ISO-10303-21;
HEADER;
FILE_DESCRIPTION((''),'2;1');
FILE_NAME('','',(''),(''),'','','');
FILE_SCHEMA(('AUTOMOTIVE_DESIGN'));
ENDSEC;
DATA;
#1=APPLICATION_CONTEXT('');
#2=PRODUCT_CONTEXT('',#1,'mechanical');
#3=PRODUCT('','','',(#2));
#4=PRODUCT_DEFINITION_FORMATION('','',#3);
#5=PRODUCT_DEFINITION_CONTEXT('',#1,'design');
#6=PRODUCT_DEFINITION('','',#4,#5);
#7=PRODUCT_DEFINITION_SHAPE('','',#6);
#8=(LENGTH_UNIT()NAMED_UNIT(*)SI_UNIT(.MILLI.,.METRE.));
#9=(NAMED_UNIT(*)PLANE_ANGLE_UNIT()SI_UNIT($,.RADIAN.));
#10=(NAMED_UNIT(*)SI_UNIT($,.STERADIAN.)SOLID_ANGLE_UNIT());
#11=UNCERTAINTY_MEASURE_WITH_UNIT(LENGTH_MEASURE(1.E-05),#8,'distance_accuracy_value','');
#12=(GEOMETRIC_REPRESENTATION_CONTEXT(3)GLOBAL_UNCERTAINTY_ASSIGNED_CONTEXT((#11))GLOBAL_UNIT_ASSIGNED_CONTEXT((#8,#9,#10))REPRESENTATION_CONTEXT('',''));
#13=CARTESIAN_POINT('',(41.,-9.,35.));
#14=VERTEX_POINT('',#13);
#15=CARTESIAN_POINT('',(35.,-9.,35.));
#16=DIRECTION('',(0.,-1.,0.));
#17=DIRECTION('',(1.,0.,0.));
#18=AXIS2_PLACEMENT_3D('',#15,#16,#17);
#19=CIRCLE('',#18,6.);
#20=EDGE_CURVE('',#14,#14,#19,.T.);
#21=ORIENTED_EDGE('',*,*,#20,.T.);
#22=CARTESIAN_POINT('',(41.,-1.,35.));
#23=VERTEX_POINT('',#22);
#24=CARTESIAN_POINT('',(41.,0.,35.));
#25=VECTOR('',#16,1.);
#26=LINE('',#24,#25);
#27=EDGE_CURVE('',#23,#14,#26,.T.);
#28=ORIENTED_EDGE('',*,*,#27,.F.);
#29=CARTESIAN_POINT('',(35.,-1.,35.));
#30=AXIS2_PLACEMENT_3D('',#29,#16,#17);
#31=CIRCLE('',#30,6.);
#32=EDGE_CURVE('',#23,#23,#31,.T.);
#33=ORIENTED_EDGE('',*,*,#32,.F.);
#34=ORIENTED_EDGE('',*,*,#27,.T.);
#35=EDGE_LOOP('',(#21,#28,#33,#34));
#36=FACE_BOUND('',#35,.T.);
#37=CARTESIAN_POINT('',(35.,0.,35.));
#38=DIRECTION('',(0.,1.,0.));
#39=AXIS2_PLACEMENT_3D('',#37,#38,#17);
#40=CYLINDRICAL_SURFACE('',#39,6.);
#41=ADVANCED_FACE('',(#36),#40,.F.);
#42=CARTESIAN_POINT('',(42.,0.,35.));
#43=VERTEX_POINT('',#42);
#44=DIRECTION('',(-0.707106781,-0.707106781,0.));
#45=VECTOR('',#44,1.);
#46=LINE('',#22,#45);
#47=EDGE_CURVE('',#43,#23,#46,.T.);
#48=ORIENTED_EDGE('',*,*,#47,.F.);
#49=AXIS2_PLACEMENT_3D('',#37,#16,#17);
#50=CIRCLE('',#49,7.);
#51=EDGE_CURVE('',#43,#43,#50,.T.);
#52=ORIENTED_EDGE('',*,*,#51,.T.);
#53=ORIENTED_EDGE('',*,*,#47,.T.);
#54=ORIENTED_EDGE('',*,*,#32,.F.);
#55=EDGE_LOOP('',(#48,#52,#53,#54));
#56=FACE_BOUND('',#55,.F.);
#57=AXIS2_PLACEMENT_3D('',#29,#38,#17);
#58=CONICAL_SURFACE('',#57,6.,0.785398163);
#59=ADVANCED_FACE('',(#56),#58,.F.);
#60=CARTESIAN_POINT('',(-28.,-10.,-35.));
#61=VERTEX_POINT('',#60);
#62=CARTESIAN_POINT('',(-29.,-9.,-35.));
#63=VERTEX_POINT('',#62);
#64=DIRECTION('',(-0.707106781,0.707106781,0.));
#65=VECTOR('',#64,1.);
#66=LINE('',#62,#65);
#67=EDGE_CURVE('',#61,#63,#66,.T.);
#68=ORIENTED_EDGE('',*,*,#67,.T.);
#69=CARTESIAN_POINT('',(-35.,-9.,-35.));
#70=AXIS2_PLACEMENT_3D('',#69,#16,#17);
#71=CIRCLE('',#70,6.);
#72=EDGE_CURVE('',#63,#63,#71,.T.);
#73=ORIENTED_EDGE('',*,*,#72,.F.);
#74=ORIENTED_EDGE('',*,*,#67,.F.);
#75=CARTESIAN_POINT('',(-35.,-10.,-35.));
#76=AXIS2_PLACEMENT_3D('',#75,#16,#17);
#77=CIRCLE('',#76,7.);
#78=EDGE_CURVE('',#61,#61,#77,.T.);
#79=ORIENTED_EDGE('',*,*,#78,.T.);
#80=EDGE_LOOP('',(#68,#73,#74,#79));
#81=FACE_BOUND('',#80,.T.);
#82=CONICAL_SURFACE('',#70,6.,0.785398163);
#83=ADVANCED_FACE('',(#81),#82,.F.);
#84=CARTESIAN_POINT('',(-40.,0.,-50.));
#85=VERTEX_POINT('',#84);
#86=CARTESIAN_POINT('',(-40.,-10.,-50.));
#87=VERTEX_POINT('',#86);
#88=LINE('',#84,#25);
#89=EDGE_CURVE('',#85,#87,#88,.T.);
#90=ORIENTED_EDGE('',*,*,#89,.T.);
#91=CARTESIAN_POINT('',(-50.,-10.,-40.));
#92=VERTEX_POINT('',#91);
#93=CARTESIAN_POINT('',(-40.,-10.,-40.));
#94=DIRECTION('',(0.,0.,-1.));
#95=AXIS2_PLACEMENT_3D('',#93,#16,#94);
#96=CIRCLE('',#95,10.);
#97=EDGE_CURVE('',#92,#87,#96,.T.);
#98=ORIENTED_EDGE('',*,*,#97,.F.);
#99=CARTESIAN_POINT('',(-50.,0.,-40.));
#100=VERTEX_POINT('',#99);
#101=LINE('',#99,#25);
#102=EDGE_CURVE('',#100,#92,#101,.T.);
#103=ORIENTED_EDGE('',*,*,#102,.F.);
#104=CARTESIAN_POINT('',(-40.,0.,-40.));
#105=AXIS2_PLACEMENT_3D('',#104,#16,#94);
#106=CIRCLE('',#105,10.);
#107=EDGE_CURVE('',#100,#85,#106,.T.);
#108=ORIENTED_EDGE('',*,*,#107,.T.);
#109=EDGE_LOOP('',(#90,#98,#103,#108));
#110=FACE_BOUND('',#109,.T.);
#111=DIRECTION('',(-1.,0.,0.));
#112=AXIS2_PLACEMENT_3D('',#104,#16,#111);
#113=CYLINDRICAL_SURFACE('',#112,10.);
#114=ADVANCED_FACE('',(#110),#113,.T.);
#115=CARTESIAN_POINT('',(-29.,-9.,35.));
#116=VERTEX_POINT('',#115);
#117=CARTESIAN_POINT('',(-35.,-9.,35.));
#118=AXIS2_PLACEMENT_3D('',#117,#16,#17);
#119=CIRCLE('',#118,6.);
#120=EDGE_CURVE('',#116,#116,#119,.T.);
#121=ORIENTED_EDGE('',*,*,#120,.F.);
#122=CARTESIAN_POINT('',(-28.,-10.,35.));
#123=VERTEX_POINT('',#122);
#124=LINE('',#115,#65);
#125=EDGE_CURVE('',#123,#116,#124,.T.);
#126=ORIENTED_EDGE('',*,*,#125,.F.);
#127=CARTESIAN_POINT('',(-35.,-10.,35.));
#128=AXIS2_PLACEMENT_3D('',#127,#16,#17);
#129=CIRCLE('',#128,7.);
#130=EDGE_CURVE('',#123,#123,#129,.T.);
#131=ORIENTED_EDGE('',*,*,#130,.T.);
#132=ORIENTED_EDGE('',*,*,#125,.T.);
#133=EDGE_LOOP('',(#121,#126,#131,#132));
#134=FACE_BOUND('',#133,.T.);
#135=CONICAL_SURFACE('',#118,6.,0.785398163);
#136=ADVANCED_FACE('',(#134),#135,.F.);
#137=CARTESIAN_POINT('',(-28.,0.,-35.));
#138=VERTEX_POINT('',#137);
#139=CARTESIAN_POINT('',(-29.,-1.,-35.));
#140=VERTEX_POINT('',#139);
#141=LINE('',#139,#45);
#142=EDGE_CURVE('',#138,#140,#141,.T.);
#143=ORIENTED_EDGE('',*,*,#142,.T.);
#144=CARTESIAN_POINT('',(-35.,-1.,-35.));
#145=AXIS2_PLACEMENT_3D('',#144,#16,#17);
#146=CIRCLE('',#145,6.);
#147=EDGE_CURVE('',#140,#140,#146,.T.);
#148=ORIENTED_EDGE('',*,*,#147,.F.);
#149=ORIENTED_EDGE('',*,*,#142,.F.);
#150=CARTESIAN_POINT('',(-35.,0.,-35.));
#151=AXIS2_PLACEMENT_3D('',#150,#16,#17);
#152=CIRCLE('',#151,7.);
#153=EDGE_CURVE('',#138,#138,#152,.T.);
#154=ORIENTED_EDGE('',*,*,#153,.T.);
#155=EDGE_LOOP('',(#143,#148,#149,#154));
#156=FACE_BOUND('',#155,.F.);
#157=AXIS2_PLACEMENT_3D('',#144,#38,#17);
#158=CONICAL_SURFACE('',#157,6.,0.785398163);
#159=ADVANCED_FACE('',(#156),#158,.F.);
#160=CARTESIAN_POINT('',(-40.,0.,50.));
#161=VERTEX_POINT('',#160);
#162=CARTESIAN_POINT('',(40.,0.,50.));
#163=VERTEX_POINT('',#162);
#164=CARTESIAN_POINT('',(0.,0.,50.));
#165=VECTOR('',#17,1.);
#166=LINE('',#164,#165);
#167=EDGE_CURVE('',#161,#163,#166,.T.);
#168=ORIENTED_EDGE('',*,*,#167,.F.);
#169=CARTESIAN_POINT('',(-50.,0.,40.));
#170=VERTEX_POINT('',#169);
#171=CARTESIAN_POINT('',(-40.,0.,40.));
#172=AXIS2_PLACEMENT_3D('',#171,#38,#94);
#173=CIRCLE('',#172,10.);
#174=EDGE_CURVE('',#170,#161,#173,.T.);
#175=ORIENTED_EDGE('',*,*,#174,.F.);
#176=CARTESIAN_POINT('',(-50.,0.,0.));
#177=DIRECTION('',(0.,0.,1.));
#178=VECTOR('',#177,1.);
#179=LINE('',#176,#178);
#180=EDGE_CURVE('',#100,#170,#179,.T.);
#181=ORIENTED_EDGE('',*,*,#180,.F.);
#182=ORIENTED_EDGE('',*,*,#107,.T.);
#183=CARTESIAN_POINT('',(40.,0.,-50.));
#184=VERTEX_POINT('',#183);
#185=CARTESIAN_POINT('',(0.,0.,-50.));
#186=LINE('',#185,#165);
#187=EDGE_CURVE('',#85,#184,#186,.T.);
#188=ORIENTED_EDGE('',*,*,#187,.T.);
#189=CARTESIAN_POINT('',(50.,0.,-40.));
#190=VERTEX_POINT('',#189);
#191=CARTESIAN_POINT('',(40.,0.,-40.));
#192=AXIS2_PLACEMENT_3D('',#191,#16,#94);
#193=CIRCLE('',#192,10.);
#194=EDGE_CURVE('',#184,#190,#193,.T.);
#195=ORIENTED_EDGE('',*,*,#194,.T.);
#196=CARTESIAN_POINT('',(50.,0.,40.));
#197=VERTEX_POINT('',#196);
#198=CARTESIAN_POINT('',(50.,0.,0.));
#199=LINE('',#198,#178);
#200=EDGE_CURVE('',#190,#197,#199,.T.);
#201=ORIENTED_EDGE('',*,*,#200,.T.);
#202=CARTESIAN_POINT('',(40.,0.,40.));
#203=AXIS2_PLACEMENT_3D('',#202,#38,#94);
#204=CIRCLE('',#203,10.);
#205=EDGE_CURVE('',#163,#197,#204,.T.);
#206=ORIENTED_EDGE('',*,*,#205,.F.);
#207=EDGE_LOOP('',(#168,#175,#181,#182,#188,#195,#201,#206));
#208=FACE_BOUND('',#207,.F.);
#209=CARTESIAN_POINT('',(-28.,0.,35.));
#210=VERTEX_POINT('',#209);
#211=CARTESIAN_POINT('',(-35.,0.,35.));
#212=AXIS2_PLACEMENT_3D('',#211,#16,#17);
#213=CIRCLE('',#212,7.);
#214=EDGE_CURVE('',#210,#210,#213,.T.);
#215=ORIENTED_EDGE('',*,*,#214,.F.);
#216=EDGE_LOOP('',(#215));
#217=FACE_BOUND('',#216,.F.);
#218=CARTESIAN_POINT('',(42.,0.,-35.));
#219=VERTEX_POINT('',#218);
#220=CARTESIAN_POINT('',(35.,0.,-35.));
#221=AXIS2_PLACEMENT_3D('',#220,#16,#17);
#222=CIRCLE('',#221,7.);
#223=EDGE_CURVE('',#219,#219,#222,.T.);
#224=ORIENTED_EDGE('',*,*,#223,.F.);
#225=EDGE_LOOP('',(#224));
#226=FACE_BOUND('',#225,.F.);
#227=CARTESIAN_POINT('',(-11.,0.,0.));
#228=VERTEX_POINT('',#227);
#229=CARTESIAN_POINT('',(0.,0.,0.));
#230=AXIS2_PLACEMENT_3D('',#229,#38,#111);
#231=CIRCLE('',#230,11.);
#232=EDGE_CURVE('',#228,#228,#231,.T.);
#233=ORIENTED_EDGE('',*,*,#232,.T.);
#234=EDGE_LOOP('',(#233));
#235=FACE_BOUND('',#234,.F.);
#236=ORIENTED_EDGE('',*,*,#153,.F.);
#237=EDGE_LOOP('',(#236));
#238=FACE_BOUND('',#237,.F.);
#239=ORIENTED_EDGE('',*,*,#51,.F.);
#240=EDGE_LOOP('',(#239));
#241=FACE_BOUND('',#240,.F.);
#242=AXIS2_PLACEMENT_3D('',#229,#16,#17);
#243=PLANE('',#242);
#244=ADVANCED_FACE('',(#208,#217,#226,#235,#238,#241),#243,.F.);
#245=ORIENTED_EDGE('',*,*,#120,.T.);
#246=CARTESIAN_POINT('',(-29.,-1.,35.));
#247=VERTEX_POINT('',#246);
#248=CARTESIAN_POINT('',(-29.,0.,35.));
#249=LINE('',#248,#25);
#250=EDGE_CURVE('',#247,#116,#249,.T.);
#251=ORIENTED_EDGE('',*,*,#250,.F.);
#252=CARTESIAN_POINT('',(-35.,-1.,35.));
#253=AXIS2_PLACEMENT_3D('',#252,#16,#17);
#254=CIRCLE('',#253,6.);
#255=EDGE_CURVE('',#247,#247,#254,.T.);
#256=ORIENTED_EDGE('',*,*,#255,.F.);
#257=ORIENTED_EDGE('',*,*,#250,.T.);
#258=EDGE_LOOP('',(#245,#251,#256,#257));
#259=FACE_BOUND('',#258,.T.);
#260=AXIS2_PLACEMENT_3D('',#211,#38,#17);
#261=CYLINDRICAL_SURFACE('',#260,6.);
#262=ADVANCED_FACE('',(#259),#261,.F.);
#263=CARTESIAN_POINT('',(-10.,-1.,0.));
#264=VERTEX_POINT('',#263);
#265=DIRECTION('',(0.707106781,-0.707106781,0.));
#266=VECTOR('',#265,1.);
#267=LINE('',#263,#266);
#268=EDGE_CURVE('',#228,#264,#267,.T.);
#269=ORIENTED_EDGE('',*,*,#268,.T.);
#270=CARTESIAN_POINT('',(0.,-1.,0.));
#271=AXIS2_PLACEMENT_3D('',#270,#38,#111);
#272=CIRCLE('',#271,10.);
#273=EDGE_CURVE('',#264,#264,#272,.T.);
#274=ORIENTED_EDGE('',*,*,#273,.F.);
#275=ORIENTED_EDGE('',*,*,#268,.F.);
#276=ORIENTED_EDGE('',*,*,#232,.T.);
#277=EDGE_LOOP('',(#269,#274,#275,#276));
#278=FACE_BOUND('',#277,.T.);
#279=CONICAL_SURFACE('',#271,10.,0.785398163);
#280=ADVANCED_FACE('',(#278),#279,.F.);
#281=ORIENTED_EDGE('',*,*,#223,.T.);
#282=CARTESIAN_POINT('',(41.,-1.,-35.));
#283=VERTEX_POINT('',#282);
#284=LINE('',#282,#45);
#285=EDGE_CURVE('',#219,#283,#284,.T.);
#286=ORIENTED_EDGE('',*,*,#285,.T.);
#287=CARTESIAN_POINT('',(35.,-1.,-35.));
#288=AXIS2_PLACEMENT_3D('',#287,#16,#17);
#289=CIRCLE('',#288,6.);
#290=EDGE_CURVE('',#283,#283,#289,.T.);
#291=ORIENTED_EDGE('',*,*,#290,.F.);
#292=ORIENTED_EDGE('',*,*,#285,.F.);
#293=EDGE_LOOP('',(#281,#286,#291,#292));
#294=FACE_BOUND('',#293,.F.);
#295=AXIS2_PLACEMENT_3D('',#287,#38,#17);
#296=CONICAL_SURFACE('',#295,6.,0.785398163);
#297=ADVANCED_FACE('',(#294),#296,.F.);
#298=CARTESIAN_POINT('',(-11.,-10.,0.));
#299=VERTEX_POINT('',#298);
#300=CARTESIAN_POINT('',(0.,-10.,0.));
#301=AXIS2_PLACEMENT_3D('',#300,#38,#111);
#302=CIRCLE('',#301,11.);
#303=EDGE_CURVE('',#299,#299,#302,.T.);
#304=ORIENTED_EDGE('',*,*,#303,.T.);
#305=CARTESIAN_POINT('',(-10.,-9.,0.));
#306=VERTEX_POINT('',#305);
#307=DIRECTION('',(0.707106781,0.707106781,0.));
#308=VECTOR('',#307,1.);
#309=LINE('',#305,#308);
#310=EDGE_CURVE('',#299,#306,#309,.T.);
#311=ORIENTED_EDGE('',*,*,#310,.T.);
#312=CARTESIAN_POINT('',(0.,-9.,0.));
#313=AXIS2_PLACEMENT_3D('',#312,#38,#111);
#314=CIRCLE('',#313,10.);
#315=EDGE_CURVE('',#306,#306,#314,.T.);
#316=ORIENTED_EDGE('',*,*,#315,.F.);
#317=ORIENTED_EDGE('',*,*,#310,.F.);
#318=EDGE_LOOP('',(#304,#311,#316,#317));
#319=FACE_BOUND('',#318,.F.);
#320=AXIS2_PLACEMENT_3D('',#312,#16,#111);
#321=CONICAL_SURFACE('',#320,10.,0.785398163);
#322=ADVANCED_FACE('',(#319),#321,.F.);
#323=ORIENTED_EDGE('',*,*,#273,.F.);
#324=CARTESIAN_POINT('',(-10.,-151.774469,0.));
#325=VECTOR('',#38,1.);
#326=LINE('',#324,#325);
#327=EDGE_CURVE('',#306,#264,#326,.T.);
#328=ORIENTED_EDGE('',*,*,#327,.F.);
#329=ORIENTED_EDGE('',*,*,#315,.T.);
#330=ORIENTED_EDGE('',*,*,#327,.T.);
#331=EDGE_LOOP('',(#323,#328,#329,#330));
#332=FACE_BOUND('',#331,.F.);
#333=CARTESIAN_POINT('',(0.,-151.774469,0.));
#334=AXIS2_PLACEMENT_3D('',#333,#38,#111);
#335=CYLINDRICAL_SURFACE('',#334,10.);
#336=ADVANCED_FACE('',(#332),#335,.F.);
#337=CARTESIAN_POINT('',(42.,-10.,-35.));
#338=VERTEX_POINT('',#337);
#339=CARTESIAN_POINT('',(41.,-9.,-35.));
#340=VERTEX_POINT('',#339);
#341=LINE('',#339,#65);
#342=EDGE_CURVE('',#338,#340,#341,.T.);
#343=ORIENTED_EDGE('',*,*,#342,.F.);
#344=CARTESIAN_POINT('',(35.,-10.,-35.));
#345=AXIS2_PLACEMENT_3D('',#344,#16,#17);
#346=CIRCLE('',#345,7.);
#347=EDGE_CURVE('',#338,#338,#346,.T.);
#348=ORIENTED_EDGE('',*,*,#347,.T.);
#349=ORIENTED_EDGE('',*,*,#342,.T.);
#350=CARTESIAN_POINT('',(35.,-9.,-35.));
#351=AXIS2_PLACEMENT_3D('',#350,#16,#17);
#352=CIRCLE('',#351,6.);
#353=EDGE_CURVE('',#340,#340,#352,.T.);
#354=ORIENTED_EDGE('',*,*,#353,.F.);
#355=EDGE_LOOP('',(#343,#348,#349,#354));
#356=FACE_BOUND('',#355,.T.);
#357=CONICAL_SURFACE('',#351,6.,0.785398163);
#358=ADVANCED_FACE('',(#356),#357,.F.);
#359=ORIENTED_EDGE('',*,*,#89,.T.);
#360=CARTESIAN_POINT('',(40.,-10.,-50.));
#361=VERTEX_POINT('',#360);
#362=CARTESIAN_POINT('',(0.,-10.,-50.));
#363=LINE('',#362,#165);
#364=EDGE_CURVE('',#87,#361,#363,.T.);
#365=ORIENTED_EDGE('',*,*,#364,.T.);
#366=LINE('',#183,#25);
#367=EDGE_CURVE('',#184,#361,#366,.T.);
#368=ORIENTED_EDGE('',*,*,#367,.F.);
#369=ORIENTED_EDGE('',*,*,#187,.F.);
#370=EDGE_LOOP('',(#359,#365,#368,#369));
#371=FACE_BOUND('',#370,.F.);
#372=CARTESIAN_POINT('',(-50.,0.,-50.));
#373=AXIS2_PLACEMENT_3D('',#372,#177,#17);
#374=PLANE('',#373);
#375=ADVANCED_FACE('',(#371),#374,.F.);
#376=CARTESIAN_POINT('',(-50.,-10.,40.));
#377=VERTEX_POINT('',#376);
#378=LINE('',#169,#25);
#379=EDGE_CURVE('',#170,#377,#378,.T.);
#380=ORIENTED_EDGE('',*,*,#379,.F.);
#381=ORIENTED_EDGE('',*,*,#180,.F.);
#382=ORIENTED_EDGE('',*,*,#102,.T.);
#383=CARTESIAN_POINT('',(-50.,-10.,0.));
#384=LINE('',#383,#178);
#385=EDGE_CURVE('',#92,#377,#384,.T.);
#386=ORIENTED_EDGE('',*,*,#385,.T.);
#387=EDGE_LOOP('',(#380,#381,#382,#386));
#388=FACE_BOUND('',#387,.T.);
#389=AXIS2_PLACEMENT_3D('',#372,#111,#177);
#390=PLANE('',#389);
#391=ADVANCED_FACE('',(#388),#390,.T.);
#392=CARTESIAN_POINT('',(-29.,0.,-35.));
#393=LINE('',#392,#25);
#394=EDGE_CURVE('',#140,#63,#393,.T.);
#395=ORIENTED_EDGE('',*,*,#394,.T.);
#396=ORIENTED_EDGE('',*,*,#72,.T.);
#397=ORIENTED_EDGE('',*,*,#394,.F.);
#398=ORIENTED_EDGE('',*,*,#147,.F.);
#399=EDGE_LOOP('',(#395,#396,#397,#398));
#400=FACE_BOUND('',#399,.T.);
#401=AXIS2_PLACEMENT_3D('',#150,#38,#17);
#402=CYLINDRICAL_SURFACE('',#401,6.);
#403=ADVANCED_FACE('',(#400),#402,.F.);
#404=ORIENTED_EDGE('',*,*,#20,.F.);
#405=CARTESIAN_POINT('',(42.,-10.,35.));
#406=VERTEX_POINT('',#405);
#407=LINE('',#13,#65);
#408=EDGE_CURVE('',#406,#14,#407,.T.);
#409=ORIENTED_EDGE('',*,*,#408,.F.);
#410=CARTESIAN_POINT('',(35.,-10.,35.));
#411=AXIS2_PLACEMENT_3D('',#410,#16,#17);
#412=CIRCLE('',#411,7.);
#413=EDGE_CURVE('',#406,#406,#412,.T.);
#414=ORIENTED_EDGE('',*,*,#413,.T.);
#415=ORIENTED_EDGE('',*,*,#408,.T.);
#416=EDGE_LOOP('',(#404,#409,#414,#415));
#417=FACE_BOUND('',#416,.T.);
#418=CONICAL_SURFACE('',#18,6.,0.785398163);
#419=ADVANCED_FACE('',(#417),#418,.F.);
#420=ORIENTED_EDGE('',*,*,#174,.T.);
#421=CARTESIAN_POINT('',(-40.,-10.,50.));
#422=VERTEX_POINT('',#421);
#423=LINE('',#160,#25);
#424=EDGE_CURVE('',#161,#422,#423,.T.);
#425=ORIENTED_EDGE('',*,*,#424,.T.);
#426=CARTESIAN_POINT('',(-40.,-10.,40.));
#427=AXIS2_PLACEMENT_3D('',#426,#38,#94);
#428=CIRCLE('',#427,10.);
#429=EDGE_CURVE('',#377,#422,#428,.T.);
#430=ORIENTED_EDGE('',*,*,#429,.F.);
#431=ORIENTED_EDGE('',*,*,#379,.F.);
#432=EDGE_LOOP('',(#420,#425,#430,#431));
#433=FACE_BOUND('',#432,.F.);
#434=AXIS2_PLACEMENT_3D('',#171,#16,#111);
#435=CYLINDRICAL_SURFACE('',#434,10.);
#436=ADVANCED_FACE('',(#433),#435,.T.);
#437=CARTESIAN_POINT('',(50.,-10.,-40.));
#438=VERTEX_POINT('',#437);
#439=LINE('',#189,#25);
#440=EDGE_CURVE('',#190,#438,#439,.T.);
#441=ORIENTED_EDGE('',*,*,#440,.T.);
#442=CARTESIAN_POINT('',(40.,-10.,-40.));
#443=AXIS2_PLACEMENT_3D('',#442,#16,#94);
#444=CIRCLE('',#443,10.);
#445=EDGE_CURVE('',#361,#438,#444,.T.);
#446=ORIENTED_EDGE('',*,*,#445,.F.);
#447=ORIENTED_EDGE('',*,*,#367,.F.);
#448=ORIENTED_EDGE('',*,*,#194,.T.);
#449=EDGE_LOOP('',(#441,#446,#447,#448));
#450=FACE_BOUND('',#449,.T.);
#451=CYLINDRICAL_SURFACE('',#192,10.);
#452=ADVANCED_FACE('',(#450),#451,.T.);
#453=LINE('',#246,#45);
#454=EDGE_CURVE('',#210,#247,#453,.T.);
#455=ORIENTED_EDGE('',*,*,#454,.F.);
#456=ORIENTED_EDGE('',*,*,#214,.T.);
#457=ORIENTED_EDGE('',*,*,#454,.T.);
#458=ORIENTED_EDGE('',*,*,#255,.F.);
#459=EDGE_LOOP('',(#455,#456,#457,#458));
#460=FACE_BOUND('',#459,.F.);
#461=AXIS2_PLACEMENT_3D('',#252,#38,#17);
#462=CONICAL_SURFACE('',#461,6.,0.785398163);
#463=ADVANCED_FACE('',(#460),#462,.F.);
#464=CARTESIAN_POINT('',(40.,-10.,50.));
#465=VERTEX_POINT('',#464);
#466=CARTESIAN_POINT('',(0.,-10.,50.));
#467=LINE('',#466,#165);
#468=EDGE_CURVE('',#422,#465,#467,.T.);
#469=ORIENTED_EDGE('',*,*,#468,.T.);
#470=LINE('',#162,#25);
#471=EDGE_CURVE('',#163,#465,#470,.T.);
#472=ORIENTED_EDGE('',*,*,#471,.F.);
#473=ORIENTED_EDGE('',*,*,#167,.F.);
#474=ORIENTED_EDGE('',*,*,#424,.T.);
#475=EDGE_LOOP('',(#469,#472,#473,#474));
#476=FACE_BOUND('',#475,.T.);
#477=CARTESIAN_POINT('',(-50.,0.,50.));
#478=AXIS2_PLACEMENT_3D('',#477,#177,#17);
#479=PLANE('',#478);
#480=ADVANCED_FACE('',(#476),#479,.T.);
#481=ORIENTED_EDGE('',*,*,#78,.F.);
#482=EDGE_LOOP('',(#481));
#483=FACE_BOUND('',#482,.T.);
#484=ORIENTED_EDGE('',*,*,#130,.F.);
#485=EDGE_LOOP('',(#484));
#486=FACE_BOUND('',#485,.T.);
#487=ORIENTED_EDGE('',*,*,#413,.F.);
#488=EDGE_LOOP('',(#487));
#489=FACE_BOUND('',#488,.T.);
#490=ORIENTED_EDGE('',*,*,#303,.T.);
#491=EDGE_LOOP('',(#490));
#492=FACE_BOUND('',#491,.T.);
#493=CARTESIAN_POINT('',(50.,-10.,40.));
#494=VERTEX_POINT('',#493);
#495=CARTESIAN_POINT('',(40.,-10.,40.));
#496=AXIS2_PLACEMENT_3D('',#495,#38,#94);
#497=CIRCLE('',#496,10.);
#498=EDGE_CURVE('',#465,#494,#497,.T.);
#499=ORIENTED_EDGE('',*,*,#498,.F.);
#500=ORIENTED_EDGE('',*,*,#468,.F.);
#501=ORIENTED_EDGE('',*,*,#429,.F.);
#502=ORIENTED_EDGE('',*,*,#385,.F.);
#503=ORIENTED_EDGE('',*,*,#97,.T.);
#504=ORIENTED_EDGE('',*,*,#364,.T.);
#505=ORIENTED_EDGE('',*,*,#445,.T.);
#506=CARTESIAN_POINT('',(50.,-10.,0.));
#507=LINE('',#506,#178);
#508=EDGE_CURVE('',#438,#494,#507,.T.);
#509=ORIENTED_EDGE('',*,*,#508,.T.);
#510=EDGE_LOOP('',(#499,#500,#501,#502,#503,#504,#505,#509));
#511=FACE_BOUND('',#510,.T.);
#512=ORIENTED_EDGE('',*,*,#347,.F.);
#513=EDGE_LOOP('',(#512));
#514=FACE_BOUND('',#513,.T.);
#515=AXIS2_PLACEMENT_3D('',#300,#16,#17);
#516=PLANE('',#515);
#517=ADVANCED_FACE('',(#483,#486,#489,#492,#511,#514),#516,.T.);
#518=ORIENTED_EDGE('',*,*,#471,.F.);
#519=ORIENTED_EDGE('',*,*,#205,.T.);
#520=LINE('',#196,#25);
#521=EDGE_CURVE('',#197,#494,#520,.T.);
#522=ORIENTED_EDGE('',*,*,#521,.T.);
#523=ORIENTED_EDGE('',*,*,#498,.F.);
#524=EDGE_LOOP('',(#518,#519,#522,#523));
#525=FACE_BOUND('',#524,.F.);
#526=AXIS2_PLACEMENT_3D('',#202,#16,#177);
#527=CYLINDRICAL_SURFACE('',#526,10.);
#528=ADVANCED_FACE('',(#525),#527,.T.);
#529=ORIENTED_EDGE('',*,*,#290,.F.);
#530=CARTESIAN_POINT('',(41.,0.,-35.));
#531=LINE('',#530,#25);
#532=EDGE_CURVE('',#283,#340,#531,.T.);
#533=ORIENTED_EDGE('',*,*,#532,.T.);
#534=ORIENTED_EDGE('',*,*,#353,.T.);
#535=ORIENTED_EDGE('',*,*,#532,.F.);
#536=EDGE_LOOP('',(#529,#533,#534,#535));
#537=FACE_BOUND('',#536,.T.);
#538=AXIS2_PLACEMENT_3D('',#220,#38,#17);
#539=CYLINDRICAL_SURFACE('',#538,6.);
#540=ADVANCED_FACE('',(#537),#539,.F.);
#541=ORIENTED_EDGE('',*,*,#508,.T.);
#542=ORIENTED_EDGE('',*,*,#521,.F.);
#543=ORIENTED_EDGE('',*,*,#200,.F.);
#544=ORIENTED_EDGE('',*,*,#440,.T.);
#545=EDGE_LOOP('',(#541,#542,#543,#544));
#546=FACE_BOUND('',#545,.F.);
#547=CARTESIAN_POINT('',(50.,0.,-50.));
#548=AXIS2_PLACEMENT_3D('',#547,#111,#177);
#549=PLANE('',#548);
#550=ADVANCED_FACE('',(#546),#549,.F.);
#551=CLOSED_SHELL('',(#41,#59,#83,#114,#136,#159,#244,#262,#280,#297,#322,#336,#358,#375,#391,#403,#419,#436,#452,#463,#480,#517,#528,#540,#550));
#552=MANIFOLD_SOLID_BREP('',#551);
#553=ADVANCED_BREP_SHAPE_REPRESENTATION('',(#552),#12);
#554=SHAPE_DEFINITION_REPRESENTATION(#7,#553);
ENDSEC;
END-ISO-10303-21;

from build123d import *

# Parameters (mm, degrees)
F0_W     = 100
F0_H     = 100
F0_R     = 6
F1_DEPTH = 10
F3_D     = 20
F4_R     = 10
F5_SIZE  = 1


with BuildPart() as f1:
    # F0 (on Front) → F1 (new body)
    with BuildSketch(Plane.XZ):
        Rectangle(F0_W, F0_H)
        with Locations((-35, -35)):
            Circle(F0_R, mode=Mode.SUBTRACT)
        with Locations((35, -35)):
            Circle(F0_R, mode=Mode.SUBTRACT)
        with Locations((-35, 35)):
            Circle(F0_R, mode=Mode.SUBTRACT)
        with Locations((35, 35)):
            Circle(F0_R, mode=Mode.SUBTRACT)
    extrude(amount=F1_DEPTH)

    # F3 (through all)
    with Locations(Plane.XZ.offset(10)):
        with Locations((0, 0)):
            Hole(F3_D / 2)

    # F4
    f4_edges = [f1.edges().sort_by_distance(p)[0] for p in [
        (-50, -5, -50),
        (50, -5, -50),
        (50, -5, 50),
        (-50, -5, 50),
    ]]
    fillet(f4_edges, radius=F4_R)

    # F5
    f5_edges = [f1.edges().sort_by_distance(p)[0] for p in [
        (-41, -10, 35),
        (29, -10, 35),
        (29, -10, -35),
        (-41, -10, -35),
        (-41, 0, 35),
        (-41, 0, -35),
        (29, 0, -35),
        (29, 0, 35),
        (-10, 0, 0),
        (-10, -10, 0),
    ]]
    chamfer(f5_edges, length=F5_SIZE)


solid = f1.part
